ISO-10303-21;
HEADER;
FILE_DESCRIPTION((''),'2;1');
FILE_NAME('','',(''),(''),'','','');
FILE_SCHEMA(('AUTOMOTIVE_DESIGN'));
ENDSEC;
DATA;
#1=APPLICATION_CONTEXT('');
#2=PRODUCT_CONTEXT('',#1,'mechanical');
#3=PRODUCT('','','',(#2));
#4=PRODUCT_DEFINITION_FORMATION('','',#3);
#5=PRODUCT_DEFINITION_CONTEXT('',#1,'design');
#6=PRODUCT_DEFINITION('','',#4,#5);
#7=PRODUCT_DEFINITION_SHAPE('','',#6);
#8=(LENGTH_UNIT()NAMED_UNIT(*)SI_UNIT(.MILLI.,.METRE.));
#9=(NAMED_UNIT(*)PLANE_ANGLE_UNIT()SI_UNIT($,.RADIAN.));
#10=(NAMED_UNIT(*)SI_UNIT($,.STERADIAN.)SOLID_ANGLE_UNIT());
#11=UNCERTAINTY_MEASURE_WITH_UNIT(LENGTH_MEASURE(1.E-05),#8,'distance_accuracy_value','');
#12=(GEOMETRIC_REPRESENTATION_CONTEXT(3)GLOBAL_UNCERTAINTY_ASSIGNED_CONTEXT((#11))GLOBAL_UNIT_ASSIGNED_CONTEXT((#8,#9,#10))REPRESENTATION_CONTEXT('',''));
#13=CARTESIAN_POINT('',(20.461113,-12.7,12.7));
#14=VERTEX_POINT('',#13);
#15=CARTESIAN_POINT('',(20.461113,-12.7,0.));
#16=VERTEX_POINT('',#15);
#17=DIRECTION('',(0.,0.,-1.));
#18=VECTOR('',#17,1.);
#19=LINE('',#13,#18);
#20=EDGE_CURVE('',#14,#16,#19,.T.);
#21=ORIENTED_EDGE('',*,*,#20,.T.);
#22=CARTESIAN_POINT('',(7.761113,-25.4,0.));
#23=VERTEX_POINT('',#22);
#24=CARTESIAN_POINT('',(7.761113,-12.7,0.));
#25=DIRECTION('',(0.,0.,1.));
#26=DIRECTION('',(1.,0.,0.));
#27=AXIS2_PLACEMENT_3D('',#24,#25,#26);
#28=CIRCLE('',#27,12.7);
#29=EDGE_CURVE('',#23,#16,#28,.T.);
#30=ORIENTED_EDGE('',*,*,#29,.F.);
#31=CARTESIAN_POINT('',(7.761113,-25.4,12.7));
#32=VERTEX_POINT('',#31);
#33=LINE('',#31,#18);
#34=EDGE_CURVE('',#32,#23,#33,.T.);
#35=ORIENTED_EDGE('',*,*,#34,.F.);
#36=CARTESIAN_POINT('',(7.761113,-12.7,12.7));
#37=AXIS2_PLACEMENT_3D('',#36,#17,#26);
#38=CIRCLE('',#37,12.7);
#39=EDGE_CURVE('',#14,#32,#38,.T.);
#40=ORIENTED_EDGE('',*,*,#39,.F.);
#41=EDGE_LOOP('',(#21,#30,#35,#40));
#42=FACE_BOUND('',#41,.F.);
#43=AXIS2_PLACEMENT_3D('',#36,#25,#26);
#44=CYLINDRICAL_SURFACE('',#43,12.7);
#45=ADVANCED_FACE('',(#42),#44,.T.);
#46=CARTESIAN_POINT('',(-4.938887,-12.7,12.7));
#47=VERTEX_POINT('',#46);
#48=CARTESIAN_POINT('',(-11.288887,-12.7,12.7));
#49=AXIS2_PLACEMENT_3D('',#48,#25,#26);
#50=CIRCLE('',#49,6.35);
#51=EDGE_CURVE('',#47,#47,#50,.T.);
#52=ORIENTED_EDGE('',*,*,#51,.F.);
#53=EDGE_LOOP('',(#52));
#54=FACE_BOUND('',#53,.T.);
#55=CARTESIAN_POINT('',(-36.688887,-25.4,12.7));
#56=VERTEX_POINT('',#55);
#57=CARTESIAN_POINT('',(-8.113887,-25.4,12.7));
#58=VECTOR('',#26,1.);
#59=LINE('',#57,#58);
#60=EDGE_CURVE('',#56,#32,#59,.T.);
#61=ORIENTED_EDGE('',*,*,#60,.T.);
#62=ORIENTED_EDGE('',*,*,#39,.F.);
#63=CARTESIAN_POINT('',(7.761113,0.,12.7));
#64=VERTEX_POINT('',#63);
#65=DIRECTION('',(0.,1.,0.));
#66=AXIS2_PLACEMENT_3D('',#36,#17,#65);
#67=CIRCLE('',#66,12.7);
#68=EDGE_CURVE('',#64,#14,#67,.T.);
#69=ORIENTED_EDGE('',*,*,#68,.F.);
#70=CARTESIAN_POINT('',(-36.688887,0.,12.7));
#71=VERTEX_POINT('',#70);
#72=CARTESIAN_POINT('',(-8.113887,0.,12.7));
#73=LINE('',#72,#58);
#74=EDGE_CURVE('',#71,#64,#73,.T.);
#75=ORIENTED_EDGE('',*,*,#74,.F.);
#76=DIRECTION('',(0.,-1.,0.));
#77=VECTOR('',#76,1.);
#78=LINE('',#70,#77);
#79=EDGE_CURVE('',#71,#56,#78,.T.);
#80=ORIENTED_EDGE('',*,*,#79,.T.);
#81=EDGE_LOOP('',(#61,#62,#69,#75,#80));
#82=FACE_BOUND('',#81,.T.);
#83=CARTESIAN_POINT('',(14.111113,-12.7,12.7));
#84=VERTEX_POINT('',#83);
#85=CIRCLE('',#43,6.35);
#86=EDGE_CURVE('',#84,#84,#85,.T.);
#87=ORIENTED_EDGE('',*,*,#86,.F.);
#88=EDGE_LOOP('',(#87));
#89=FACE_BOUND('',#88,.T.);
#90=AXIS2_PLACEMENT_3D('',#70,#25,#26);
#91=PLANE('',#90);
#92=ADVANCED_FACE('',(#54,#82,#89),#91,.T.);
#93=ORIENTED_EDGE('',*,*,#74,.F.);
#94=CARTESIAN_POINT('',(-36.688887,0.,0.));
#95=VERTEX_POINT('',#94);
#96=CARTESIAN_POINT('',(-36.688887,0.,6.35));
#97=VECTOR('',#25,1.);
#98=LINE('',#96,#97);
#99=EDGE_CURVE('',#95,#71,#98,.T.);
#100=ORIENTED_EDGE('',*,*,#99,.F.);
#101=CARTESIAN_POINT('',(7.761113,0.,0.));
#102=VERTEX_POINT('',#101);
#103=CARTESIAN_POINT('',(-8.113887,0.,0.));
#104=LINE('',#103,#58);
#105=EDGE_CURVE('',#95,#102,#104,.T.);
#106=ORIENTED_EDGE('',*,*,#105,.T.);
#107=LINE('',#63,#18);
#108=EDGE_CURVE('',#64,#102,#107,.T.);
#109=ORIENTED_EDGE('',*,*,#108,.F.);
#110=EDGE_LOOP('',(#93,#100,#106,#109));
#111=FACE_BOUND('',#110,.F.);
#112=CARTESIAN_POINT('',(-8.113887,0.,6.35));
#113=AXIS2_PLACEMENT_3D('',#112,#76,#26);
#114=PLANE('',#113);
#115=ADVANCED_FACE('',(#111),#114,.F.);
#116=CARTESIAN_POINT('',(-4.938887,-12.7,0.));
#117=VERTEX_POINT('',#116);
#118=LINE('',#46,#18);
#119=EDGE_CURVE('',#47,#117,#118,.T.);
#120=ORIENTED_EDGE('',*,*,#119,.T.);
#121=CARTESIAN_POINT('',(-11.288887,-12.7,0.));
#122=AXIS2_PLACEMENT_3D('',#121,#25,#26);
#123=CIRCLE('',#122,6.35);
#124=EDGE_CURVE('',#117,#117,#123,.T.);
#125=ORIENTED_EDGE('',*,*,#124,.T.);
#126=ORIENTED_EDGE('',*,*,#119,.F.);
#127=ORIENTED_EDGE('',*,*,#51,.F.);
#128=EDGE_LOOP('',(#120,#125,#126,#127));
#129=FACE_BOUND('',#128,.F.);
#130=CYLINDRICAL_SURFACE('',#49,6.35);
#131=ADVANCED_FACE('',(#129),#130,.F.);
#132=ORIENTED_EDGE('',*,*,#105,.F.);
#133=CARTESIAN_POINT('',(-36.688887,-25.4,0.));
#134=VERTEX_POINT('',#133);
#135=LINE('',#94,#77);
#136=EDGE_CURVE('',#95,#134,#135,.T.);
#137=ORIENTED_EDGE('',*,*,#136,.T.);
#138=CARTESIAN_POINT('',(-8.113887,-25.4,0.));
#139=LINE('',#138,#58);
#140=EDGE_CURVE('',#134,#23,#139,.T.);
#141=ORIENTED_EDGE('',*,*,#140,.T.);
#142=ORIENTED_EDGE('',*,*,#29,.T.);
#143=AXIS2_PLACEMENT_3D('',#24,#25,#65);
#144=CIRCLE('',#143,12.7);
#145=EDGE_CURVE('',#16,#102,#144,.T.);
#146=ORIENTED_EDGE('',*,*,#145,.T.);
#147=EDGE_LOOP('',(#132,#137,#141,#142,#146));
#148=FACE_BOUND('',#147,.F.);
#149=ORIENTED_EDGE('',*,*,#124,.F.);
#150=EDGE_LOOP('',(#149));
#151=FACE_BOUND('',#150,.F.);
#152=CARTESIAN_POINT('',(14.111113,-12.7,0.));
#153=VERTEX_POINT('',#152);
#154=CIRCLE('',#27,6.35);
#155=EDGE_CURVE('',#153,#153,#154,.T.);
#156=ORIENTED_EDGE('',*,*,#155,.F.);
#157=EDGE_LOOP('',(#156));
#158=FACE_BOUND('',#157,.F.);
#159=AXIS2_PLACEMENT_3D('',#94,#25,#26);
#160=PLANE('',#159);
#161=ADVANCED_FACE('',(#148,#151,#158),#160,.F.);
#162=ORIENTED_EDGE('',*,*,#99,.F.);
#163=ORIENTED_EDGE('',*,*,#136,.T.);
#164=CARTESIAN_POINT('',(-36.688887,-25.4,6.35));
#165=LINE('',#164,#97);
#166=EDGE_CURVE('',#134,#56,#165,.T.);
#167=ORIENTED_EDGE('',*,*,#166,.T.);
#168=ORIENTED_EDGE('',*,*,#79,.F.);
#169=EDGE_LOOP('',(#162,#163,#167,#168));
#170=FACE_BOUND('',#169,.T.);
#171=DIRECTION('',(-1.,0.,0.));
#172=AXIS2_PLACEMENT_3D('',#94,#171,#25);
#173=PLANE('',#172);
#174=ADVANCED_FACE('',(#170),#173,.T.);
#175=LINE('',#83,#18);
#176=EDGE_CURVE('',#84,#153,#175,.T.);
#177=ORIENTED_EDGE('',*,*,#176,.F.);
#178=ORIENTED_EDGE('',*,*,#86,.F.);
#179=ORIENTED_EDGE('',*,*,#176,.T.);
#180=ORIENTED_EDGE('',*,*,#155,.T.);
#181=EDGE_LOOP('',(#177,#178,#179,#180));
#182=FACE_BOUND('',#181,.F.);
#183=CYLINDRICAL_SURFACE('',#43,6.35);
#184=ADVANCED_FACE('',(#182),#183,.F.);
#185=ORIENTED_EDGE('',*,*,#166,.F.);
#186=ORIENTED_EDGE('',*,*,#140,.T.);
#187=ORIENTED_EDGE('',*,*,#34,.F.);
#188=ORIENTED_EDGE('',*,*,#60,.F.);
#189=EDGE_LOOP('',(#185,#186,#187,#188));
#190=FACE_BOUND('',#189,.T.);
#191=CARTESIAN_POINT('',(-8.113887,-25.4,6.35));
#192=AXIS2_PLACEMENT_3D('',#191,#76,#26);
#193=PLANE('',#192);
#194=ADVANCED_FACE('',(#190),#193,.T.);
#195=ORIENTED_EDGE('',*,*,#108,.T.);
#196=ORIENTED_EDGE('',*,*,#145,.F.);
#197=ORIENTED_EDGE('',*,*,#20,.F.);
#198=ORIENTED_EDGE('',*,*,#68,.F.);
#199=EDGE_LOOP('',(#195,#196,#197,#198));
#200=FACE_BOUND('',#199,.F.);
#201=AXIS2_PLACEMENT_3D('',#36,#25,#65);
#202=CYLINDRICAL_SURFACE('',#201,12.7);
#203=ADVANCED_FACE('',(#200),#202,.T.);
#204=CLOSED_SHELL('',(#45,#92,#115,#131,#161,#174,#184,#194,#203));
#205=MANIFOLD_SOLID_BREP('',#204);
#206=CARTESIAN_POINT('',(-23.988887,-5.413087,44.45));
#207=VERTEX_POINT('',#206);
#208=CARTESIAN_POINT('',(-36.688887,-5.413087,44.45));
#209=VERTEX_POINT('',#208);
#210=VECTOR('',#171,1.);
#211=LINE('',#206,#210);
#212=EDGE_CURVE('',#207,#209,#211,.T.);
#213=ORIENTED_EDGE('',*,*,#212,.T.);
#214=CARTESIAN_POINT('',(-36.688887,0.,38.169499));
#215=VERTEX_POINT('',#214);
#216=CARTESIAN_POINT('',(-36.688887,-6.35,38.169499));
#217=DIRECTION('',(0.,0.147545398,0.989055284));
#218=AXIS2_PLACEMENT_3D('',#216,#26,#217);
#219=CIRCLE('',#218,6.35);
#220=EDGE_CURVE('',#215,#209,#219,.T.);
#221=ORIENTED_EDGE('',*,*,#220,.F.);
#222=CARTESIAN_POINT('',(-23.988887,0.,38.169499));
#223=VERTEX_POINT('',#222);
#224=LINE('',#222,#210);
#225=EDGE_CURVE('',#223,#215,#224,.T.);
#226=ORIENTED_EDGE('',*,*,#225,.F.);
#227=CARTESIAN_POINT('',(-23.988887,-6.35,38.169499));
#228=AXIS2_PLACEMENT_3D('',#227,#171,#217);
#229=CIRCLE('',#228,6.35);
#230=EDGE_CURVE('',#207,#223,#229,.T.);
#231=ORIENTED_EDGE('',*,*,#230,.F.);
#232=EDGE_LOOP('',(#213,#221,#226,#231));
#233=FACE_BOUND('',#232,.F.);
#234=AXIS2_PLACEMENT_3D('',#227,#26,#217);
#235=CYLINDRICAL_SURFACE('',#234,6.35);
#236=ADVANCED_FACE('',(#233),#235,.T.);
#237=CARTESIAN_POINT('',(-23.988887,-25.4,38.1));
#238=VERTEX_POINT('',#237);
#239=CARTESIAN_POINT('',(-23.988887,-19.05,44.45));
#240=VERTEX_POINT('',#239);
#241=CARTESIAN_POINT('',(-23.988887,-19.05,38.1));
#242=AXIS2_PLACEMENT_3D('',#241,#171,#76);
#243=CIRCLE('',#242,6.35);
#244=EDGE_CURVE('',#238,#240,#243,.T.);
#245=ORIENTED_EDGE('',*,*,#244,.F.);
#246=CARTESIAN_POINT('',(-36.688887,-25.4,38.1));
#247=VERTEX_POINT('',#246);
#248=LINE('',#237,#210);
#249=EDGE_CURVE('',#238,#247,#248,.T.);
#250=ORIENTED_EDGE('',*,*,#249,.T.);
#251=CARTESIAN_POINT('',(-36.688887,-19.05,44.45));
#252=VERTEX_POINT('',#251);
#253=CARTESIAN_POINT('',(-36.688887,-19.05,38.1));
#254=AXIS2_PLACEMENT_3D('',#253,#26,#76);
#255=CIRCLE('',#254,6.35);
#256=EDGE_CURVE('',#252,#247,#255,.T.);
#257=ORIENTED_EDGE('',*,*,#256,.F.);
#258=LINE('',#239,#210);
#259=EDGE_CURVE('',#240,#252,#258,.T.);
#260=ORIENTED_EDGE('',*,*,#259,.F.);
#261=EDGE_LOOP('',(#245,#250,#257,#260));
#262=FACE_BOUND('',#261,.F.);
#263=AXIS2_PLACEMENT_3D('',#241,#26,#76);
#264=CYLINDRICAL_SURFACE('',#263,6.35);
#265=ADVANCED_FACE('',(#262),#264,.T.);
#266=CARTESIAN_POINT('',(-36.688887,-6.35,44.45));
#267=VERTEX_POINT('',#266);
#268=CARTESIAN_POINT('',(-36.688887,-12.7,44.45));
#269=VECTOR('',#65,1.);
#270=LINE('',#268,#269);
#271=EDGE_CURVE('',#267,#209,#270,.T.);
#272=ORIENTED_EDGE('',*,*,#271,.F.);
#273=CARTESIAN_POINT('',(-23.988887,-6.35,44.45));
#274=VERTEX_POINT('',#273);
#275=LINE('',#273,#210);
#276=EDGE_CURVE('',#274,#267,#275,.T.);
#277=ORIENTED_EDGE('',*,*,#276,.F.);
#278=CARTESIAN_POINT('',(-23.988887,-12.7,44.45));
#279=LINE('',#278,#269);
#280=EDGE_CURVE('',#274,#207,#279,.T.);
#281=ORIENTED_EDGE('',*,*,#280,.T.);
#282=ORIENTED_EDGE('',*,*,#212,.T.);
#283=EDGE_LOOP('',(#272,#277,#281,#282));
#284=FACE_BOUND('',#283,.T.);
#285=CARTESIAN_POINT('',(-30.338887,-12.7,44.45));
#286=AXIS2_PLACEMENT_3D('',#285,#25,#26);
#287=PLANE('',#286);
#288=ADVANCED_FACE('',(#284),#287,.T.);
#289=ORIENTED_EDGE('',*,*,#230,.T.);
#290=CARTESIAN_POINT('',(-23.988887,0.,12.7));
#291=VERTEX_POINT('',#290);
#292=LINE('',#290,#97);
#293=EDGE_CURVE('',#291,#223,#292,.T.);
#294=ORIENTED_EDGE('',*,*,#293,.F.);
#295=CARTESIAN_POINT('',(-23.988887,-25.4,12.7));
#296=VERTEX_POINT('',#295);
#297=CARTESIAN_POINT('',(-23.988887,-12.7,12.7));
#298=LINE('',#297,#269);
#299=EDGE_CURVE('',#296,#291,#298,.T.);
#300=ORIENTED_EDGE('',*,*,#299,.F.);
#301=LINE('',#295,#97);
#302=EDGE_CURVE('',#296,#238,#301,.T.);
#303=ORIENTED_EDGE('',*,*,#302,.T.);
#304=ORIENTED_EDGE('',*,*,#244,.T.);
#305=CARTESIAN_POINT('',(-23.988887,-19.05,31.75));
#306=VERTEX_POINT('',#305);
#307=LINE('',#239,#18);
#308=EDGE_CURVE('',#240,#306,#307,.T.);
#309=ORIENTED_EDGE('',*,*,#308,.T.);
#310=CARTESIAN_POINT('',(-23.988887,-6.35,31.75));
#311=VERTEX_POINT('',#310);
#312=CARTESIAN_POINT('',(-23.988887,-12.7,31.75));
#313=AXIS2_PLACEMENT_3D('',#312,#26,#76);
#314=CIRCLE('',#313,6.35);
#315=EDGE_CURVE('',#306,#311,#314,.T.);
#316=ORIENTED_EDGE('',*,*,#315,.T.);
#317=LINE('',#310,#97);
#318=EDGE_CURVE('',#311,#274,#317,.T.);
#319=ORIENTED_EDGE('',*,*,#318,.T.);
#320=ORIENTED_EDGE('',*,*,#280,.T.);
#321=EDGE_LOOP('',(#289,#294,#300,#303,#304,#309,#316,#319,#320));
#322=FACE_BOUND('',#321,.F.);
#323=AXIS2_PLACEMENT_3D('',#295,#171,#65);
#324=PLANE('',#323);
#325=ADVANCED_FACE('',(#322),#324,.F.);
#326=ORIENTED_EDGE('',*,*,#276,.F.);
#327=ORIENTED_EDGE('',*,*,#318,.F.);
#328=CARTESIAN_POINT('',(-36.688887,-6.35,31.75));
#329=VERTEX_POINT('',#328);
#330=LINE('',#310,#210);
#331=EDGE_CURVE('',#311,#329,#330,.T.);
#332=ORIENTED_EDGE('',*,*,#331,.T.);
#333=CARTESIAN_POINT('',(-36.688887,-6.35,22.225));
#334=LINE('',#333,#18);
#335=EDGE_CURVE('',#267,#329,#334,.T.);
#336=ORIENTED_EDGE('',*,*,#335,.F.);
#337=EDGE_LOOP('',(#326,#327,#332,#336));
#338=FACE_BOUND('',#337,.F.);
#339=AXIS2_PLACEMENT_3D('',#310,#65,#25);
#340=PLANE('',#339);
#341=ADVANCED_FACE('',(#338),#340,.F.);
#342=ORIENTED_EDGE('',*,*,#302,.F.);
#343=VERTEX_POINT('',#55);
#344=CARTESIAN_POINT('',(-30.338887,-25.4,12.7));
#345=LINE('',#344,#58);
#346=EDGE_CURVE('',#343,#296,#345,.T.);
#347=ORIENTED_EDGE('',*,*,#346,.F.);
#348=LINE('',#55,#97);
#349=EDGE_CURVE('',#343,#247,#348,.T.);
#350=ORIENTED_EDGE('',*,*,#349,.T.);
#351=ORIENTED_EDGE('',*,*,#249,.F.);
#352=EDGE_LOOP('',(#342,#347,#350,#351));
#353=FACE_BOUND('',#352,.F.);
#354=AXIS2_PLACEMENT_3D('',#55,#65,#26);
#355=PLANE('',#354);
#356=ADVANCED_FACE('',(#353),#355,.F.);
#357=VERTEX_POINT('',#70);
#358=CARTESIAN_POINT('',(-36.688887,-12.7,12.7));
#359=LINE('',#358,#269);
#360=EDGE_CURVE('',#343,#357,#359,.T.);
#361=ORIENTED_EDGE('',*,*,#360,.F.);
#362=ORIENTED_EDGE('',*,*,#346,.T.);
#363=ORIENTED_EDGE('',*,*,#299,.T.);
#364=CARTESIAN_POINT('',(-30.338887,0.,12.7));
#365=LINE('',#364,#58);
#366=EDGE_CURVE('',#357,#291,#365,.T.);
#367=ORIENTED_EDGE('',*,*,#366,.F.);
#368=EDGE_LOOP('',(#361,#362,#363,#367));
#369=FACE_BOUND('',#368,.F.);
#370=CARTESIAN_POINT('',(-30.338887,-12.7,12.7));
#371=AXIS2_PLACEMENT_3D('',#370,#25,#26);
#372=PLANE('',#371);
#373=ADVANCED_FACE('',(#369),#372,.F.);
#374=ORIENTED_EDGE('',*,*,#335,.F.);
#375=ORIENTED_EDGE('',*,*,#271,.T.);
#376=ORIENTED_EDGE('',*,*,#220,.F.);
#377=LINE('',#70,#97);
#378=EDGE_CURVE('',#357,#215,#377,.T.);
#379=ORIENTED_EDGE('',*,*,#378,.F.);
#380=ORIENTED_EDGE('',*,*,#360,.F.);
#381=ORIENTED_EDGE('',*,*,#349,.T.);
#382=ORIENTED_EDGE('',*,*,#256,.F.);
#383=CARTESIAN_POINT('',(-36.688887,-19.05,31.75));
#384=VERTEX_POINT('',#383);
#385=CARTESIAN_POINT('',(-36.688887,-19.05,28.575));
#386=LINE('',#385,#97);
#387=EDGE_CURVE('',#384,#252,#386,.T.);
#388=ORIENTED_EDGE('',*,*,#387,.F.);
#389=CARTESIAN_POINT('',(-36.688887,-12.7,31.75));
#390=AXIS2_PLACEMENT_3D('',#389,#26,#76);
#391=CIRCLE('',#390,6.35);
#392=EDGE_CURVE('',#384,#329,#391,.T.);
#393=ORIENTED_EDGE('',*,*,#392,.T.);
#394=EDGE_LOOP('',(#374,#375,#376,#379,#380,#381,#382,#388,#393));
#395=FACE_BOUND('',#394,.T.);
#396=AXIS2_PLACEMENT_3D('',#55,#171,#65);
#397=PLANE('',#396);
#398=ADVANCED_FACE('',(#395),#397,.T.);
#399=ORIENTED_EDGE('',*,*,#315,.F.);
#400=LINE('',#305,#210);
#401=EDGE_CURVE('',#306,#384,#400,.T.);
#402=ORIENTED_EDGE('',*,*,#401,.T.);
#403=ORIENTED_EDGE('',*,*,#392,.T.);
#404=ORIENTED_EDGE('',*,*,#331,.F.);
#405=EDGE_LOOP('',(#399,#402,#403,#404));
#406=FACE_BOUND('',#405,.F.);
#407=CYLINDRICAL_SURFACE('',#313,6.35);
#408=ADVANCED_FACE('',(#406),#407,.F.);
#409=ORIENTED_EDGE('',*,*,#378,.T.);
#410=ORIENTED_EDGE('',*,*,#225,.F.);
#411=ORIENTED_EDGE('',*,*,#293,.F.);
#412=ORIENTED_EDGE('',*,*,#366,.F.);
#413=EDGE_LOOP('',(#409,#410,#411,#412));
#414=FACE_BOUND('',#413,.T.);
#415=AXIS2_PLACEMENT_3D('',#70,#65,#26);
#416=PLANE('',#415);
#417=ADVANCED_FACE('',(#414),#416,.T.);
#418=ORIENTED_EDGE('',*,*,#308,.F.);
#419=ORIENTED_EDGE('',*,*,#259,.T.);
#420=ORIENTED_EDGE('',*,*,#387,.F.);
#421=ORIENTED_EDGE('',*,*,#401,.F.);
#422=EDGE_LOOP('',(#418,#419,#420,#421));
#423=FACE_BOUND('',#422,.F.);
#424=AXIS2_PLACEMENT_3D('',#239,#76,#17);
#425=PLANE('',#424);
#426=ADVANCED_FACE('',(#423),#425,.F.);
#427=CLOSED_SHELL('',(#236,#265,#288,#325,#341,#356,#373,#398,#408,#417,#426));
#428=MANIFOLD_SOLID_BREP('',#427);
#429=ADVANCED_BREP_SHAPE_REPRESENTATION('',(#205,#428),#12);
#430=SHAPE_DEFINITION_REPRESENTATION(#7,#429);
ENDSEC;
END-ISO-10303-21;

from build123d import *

# Parameters (mm, degrees)
F0_W      = 57.15
F0_H      = 12.7
F1_DEPTH  = 25.4
F2_W      = 12.7
F2_H      = 25.4
F3_DEPTH  = 31.75
F5_DEPTH  = 25.4
F8_DEPTH  = 25.4
F9_DEPTH  = 25.4
F10_R     = 6.35
F11_DEPTH = 25.4
F13_DEPTH = 25.4


with BuildPart() as f1:
    # F0 (on Front) → F1 (new body)
    with BuildSketch(Plane.XZ):
        with Locations((-8.1138868551, 6.35)):
            Rectangle(F0_W, F0_H)
    extrude(amount=F1_DEPTH)

    # F10 (on face) → F11 (cut)
    with BuildSketch(Plane.XY.offset(12.7)):
        with Locations((-11.2888868551, -12.7)):
            Circle(F10_R)
        with Locations((7.7611131449, -12.7)):
            Circle(F10_R)
    extrude(amount=-F11_DEPTH, mode=Mode.SUBTRACT)

    # F12 (on face) → F13 (cut)
    with BuildSketch(Plane.XY.offset(12.7)):
        with BuildLine():
            ThreePointArc((20.4611131449, -12.7), (16.741369266, -21.6802561211), (7.7611131449, -25.4))
            Line((7.7611131449, -25.4), (20.4611131449, -25.4))
            Line((20.4611131449, -25.4), (20.4611131449, -12.7))
        make_face()
        with BuildLine():
            ThreePointArc((7.7611131449, 0), (16.741369266, -3.7197438789), (20.4611131449, -12.7))
            Line((20.4611131449, -12.7), (20.4611131449, 0))
            Line((20.4611131449, 0), (7.7611131449, 0))
        make_face()
    extrude(amount=-F13_DEPTH, mode=Mode.SUBTRACT)


with BuildPart() as f3:
    # F2 (on face) → F3 (new body)
    with BuildSketch(Plane.XY.offset(12.7)):
        with Locations((-30.3388868551, -12.7)):
            Rectangle(F2_W, F2_H)
    extrude(amount=F3_DEPTH)

    # F4 (on face) → F5 (cut)
    with BuildSketch(Plane.YZ.offset(-23.9888868551)):
        with BuildLine():
            ThreePointArc((-19.05, 31.75), (-12.7, 38.1), (-6.35, 31.75))
            Line((-6.35, 31.75), (-6.35, 44.45))
            Line((-6.35, 44.45), (-19.05, 44.45))
            Line((-19.05, 44.45), (-19.05, 31.75))
        make_face()
        with BuildLine():
            Line((-19.05, 31.75), (-6.35, 31.75))
            ThreePointArc((-6.35, 31.75), (-12.7, 38.1), (-19.05, 31.75))
        make_face()
        with BuildLine():
            ThreePointArc((-19.05, 31.75), (-12.7, 25.4), (-6.35, 31.75))
            Line((-6.35, 31.75), (-19.05, 31.75))
        make_face()
    extrude(amount=-F5_DEPTH, mode=Mode.SUBTRACT)

    # F6 (on face) → F8 (cut)
    with BuildSketch(Plane.YZ.offset(-23.9888868551)):
        with BuildLine():
            Line((-25.4, 44.45), (-25.4, 38.1))
            ThreePointArc((-25.4, 38.1), (-23.5401280605, 42.5901280605), (-19.05, 44.45))
            Line((-19.05, 44.45), (-25.4, 44.45))
        make_face()
    extrude(amount=-F8_DEPTH, mode=Mode.SUBTRACT)

    # F7 (on face) → F9 (cut)
    with BuildSketch(Plane.YZ.offset(-23.9888868551)):
        with BuildLine():
            ThreePointArc((-5.4130867227, 44.45), (-1.5400156284, 42.3151653979), (0, 38.1694989443))
            Line((0, 38.1694989443), (0, 44.45))
            Line((0, 44.45), (-5.4130867227, 44.45))
        make_face()
    extrude(amount=-F9_DEPTH, mode=Mode.SUBTRACT)


solid = Compound([f1.part, f3.part])
